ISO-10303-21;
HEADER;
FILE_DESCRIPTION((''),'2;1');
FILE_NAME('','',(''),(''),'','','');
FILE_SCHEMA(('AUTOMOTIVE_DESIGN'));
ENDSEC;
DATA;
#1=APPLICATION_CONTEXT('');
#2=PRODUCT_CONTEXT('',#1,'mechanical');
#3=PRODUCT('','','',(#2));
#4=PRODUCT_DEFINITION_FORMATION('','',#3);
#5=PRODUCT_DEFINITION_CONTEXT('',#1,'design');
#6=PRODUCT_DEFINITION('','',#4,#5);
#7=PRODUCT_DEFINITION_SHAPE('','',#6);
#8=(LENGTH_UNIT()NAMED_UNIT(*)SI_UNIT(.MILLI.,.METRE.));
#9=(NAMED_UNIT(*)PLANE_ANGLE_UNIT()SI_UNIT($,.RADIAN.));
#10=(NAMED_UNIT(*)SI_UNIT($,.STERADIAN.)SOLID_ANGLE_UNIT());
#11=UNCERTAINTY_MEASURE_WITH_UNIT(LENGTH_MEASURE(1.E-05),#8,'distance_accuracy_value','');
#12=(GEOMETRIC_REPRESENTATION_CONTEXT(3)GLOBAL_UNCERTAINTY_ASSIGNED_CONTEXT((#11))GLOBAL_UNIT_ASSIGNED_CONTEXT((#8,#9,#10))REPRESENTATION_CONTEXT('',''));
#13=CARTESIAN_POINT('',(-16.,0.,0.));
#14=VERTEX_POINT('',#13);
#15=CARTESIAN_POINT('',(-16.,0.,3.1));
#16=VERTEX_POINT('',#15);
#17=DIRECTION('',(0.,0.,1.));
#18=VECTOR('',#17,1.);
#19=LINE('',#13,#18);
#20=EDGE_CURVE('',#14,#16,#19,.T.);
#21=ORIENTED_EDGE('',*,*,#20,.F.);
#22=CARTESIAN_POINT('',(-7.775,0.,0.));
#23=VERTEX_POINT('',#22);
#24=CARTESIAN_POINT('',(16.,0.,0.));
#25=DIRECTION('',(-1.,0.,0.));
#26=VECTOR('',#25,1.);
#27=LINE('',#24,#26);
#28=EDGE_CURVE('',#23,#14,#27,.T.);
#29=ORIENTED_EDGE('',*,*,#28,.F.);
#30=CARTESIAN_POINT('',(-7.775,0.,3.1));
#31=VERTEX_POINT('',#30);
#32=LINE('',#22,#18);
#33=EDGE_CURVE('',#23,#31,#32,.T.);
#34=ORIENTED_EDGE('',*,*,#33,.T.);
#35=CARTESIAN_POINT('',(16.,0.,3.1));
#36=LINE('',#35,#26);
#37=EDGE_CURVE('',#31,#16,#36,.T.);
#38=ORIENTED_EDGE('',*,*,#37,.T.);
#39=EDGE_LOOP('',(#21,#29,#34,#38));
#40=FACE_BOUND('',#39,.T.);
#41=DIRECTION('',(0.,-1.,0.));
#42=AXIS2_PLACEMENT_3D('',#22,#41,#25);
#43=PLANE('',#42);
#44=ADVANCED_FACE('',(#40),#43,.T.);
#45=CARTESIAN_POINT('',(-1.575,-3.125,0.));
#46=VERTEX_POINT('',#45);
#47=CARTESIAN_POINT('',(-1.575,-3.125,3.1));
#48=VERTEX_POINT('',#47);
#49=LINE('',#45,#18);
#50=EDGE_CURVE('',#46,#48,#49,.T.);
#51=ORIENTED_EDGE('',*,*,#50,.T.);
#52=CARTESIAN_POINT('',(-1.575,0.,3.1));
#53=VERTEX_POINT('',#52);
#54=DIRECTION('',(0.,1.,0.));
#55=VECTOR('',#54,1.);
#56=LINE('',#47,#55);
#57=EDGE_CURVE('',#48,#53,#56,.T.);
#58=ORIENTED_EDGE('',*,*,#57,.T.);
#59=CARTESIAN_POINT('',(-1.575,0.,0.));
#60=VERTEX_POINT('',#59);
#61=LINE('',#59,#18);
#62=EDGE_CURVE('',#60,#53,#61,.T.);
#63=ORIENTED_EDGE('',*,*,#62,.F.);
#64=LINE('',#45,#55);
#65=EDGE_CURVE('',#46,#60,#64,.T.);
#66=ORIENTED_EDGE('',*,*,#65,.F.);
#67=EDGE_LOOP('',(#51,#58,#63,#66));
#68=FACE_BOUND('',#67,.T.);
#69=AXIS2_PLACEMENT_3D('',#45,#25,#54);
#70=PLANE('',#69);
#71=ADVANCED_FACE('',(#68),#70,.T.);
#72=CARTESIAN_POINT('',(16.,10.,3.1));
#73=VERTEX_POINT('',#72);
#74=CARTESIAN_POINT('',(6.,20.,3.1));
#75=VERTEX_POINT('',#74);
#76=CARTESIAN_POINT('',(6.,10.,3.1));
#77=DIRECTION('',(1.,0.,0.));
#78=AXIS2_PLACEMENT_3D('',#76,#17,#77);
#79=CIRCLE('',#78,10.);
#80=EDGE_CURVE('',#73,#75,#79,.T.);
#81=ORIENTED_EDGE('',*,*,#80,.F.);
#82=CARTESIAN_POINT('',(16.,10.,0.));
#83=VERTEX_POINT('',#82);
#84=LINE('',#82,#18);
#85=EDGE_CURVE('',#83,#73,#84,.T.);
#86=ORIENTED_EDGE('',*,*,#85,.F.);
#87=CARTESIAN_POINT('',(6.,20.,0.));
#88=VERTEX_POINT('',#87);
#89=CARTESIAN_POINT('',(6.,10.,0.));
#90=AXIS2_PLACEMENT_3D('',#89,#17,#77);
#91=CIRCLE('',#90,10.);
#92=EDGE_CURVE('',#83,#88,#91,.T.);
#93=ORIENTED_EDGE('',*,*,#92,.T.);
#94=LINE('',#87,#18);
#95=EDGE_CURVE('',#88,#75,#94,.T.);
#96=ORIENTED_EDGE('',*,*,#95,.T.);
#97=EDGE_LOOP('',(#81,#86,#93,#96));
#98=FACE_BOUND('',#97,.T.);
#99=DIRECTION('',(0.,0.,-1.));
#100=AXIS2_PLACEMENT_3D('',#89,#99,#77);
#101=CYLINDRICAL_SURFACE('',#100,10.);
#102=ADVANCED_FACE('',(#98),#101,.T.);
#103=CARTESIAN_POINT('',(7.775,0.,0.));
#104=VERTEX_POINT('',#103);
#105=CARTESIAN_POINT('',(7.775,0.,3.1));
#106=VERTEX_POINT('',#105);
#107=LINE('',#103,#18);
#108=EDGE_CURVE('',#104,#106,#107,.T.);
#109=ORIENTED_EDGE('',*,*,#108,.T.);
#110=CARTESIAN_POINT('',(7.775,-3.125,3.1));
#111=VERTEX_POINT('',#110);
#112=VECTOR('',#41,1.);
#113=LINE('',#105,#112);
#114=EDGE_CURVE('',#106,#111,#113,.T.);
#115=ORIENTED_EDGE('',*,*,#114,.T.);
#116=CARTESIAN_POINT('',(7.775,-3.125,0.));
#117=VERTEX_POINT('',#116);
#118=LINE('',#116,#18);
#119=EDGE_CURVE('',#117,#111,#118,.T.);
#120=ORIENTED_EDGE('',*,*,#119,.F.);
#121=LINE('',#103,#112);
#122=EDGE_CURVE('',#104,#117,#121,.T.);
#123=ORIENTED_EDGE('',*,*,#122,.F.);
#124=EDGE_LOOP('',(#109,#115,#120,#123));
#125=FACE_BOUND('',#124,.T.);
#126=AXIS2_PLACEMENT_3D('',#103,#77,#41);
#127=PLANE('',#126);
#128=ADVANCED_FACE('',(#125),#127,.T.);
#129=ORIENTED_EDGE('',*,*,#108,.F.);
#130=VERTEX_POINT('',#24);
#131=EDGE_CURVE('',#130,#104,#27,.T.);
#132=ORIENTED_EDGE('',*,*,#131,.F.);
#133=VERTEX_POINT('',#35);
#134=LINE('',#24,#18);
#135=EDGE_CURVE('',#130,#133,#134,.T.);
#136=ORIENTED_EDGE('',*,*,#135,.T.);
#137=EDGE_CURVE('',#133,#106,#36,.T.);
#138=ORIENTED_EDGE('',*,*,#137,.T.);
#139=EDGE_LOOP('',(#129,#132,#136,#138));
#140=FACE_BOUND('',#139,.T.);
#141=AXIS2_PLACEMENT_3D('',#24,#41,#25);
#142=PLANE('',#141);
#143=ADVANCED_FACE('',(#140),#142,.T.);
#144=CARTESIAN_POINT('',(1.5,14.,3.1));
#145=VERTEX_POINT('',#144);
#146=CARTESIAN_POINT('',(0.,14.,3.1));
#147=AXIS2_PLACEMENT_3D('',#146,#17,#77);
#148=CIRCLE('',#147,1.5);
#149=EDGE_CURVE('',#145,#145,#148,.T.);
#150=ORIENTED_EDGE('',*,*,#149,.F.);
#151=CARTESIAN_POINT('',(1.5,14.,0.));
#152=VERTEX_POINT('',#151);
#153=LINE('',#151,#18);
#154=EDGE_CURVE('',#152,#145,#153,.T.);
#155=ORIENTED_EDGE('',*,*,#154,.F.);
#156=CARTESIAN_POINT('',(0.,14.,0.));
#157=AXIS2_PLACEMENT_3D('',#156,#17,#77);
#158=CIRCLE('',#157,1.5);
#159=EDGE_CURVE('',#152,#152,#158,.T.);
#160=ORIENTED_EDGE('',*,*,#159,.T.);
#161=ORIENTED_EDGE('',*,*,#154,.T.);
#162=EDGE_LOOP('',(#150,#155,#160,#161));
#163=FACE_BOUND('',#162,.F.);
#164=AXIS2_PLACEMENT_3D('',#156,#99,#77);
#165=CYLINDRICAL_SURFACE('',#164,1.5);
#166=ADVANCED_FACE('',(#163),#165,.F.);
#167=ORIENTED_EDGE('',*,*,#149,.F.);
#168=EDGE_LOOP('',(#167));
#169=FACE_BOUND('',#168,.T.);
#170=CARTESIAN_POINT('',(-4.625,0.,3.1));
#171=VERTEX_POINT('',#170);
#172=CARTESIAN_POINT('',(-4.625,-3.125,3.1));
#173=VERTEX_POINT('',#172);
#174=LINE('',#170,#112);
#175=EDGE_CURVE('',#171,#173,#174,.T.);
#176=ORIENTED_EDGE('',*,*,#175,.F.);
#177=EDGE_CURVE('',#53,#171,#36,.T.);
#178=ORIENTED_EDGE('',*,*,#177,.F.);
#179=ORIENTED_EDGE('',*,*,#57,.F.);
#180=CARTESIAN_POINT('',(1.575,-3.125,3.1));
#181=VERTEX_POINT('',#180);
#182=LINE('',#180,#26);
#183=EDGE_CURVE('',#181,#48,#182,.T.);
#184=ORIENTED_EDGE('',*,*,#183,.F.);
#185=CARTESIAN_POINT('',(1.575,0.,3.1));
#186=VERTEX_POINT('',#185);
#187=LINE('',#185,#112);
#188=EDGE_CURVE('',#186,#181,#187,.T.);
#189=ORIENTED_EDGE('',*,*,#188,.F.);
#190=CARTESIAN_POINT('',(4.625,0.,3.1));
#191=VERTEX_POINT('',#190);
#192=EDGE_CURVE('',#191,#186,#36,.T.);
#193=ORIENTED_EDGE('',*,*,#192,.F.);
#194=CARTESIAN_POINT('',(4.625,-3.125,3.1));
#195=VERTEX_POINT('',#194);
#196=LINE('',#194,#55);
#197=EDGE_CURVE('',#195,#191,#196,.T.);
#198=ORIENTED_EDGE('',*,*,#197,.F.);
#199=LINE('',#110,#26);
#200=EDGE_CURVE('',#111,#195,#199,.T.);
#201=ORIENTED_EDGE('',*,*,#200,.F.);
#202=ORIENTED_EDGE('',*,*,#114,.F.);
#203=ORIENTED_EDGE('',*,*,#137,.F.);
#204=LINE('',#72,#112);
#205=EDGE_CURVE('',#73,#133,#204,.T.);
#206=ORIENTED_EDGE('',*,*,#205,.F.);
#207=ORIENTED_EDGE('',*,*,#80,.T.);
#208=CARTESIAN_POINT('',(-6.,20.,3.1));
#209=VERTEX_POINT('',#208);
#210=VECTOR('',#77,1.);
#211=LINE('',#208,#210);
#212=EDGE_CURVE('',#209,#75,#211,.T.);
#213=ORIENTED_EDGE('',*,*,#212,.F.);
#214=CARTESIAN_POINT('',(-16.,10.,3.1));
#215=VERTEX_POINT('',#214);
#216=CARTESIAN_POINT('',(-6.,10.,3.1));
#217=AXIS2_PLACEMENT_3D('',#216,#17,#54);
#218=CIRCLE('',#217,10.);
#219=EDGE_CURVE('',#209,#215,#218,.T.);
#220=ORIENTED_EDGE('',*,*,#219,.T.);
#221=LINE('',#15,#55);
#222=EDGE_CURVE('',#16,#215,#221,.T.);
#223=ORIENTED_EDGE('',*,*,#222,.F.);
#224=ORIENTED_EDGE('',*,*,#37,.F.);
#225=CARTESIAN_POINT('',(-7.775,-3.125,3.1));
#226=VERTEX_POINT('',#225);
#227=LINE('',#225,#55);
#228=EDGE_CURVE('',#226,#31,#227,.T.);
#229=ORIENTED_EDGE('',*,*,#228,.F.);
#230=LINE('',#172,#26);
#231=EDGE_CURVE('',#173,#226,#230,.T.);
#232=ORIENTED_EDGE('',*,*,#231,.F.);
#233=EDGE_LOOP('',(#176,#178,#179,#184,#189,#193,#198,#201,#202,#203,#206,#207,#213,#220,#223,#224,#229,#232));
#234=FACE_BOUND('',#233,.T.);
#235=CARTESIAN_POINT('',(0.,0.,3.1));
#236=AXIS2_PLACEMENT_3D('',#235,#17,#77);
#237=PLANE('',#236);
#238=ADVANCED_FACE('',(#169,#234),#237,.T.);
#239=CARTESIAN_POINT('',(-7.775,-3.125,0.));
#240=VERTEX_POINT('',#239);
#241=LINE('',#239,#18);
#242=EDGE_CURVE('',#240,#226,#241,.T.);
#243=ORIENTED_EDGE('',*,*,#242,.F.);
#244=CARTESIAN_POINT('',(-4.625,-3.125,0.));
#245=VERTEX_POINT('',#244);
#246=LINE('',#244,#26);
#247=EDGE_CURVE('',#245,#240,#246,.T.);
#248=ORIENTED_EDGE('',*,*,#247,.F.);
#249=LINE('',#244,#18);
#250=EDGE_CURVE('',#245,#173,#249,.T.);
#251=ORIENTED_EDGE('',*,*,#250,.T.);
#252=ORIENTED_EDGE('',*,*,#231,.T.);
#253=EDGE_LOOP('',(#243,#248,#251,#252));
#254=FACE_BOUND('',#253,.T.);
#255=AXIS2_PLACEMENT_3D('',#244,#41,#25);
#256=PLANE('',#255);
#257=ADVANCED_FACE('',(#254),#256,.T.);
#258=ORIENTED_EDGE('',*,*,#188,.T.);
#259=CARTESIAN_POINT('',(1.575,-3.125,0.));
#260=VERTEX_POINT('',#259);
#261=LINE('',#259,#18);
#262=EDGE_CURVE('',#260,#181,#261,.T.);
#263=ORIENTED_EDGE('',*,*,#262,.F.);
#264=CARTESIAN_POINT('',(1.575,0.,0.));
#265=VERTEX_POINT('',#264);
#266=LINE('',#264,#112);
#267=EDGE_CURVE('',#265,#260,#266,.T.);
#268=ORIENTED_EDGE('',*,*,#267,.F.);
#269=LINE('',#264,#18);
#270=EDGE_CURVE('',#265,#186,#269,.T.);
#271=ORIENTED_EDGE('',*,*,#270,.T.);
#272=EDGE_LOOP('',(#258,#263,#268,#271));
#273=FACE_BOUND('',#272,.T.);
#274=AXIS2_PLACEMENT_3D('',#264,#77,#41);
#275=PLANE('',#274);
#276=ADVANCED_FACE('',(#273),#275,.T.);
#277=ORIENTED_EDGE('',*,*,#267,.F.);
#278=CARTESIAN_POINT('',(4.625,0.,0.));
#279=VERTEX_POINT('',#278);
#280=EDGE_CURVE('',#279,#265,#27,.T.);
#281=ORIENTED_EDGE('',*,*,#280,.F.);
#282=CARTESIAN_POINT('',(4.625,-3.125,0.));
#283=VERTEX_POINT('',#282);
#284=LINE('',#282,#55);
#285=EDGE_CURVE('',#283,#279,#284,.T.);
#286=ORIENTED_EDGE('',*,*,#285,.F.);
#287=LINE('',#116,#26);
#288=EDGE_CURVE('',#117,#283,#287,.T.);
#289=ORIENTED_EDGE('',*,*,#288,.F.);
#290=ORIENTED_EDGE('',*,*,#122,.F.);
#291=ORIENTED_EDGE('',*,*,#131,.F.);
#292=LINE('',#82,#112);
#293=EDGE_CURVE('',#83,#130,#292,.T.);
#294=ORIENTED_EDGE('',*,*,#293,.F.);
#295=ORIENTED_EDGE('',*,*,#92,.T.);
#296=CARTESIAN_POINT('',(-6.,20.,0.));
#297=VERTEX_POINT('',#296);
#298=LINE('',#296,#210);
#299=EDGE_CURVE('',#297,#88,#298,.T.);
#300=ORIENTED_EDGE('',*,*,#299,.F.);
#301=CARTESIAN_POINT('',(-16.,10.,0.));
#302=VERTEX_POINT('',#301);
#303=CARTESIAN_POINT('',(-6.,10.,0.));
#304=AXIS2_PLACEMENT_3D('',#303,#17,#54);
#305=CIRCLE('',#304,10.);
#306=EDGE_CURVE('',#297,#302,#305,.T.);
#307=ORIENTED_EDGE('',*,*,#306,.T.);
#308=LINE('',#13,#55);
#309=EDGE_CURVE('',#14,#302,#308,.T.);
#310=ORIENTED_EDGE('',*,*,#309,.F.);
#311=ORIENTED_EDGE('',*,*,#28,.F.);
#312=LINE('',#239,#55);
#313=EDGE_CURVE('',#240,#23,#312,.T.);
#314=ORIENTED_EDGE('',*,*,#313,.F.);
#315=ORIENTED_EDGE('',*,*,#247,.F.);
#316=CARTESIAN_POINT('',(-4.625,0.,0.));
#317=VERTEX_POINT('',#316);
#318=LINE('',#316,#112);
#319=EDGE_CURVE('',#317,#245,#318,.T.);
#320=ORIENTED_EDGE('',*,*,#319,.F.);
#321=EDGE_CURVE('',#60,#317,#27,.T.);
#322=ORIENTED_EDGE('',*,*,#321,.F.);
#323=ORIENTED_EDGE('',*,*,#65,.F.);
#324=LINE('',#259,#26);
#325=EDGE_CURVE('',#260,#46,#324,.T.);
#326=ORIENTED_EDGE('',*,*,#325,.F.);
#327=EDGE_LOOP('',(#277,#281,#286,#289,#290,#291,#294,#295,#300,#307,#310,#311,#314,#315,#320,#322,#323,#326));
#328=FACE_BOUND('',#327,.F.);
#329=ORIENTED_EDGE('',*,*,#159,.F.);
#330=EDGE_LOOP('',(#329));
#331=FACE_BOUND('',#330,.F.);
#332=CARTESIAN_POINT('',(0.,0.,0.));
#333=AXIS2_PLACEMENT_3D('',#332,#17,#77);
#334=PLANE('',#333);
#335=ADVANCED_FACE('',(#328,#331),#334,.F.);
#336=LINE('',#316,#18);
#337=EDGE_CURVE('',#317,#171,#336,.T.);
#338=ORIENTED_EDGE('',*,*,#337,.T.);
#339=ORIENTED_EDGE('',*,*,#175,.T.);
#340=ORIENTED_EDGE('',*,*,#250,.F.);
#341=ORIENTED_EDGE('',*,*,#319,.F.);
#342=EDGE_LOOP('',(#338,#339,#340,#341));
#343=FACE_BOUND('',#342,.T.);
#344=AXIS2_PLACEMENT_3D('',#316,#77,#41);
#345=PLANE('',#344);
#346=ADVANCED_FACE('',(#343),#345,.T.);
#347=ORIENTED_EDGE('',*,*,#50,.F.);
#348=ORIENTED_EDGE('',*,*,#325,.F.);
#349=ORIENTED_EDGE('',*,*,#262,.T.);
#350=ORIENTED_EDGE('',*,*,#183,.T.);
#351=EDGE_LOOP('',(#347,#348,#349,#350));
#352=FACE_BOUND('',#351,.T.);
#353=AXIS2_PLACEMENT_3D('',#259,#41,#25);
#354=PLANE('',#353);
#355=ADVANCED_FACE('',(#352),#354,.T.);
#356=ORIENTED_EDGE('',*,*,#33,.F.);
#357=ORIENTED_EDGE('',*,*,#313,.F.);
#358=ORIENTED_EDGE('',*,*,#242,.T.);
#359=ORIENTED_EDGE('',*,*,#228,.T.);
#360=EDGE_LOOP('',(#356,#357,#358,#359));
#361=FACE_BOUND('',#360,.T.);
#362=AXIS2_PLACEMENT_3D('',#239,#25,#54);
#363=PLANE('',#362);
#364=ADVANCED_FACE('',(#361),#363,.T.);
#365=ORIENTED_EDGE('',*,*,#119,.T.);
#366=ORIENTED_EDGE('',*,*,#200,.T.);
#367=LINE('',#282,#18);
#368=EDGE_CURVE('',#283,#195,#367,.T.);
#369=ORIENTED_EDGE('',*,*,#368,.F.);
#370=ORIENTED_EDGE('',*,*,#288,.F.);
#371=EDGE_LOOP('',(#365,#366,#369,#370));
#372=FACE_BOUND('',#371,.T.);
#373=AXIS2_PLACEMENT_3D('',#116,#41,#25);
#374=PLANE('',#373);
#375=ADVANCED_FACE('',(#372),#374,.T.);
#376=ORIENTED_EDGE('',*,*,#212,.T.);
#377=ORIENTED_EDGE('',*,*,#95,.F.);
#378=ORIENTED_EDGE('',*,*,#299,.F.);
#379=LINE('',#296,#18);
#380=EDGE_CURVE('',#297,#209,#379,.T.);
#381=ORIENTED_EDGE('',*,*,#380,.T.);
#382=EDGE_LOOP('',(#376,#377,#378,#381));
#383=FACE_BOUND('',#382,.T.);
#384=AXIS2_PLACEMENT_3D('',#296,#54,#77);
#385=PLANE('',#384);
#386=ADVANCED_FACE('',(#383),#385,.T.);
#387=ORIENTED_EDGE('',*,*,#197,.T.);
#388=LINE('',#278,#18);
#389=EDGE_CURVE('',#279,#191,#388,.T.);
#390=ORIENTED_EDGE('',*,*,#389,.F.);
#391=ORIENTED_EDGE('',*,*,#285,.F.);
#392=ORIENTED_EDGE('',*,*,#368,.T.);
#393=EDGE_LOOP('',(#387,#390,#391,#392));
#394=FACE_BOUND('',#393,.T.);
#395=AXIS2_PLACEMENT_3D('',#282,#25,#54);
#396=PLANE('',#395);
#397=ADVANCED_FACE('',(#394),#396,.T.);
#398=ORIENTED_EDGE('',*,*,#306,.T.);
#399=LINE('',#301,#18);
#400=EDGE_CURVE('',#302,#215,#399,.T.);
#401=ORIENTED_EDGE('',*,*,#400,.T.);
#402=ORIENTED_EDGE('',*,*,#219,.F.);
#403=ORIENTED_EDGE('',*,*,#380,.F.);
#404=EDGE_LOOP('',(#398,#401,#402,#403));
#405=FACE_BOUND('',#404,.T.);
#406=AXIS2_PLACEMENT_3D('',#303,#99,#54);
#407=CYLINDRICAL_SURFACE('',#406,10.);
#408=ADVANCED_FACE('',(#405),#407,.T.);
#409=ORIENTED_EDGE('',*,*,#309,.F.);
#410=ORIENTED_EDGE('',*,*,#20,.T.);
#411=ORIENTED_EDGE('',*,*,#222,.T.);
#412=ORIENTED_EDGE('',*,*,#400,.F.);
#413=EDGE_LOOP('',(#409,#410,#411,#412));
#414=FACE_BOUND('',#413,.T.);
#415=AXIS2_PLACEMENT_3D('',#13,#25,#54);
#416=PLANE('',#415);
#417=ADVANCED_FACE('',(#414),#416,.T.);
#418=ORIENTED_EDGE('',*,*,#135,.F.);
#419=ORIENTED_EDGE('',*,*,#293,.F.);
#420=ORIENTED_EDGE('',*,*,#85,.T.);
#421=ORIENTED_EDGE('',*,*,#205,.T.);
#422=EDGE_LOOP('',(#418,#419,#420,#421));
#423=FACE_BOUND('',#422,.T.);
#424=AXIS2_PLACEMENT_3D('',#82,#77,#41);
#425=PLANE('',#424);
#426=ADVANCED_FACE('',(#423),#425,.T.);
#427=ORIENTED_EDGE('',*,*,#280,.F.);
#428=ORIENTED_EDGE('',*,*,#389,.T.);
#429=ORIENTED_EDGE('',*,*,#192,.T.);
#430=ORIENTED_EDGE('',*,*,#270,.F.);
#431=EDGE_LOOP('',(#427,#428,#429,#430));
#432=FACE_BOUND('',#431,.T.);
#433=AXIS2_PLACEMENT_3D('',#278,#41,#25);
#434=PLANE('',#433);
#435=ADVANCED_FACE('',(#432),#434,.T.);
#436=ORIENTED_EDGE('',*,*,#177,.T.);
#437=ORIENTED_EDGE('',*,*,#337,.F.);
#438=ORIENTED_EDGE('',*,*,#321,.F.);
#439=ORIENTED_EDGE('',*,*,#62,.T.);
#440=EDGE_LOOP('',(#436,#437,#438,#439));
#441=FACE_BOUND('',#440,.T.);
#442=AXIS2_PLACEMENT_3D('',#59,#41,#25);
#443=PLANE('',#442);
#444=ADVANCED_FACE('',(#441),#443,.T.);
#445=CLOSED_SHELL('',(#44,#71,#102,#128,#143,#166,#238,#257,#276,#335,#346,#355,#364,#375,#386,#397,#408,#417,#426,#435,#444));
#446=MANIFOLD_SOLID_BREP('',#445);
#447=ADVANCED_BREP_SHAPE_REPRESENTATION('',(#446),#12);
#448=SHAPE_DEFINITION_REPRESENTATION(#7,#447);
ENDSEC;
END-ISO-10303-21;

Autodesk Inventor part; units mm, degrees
ref_plane "YZ Plane" through (0, 0, 0) normal (1, 0, 0) x (0, 1, 0)
ref_plane "XZ Plane" through (0, 0, 0) normal (0, 1, 0) x (-1, 0, 0)
ref_plane "XY Plane" through (0, 0, 0) normal (0, 0, 1) x (1, 0, 0)
sketch "tabs" plane through (0, 0, 0) normal (0, 0, 1) x (1, 0, 0)
  line L0 (15.6175, 13.9118) -> (18.7675, 13.9118)
  line L1 (18.7675, 13.9118) -> (18.7675, 10.7868)
  line L2 (18.7675, 10.7868) -> (15.6175, 10.7868)
  line L3 (15.6175, 10.7868) -> (15.6175, 13.9118)
  line L4 (21.8175, 13.9118) -> (24.9675, 13.9118)
  line L5 (24.9675, 13.9118) -> (24.9675, 10.7868)
  line L6 (24.9675, 10.7868) -> (21.8175, 10.7868)
  line L7 (21.8175, 10.7868) -> (21.8175, 13.9118)
  line L8 (28.0175, 13.9118) -> (31.1675, 13.9118)
  line L9 (31.1675, 13.9118) -> (31.1675, 10.7868)
  line L10 (31.1675, 10.7868) -> (28.0175, 10.7868)
  line L11 (28.0175, 10.7868) -> (28.0175, 13.9118)
  line L12 (23.3925, 10.7868) -> (23.3925, 8.8536) construction
  point P0 (23.3925, 12.1901)
  dimension "d2" = 3.15
  dimension "d3" = 3.05
  dimension "d4" = 3.05
  dimension "d5" = 3.125
sketch "Sketch1" plane through (0, 0, 0) normal (0, 0, 1) x (1, 0, 0)
  line L0 (-6, 20) -> (6, 20)
  line L1 (16, 10) -> (16, 0)
  line L2 (16, 0) -> (-16, 0)
  line L3 (-16, 0) -> (-16, 10)
  line L4 (0, 16.9043) -> (0, -20.0235) construction
  line L5 (-32.3473, 0) -> (40.4078, 0) construction
  arc A0 (-6, 20) -> (-16, 10) centre (-6, 10) ccw
  arc A1 (16, 10) -> (6, 20) centre (6, 10) ccw
  circle A2 centre (0, 14) radius 1.5
  line L6 (-7.775, 0) -> (-4.625, 0)
  line L7 (-4.625, 0) -> (-4.625, -3.125)
  line L8 (-4.625, -3.125) -> (-7.775, -3.125)
  line L9 (-7.775, -3.125) -> (-7.775, 0)
  line L10 (-1.575, 0) -> (1.575, 0)
  line L11 (1.575, 0) -> (1.575, -3.125)
  line L12 (1.575, -3.125) -> (-1.575, -3.125)
  line L13 (-1.575, -3.125) -> (-1.575, 0)
  line L14 (4.625, 0) -> (7.775, 0)
  line L15 (7.775, 0) -> (7.775, -3.125)
  line L16 (7.775, -3.125) -> (4.625, -3.125)
  line L17 (4.625, -3.125) -> (4.625, 0)
  line L18 (0, -3.125) -> (0, -5.0582) construction
  point P0 (0, 0)
  point P1 (0, 20)
  point P2 (16, 5)
  dimension "d0" = 32
  dimension "d6" = 20
  dimension "d7" = 10
  dimension "d8" = 3
  dimension "d9" = 6
extrude "Extrusion1" add sketch "Sketch1" along normal blind 3.1
equation "\"d2\" = mat + kerf"
equation "\"d3\" = mat - kerf"
equation "\"d4\" = mat - kerf"
equation "\"d5\" = mat + 0.5 * kerf"
equation "\"d10\" = mat"
equation "\"mat\" = 3.1"
equation "\"kerf\" = 0.05"
properties part number "link1"
